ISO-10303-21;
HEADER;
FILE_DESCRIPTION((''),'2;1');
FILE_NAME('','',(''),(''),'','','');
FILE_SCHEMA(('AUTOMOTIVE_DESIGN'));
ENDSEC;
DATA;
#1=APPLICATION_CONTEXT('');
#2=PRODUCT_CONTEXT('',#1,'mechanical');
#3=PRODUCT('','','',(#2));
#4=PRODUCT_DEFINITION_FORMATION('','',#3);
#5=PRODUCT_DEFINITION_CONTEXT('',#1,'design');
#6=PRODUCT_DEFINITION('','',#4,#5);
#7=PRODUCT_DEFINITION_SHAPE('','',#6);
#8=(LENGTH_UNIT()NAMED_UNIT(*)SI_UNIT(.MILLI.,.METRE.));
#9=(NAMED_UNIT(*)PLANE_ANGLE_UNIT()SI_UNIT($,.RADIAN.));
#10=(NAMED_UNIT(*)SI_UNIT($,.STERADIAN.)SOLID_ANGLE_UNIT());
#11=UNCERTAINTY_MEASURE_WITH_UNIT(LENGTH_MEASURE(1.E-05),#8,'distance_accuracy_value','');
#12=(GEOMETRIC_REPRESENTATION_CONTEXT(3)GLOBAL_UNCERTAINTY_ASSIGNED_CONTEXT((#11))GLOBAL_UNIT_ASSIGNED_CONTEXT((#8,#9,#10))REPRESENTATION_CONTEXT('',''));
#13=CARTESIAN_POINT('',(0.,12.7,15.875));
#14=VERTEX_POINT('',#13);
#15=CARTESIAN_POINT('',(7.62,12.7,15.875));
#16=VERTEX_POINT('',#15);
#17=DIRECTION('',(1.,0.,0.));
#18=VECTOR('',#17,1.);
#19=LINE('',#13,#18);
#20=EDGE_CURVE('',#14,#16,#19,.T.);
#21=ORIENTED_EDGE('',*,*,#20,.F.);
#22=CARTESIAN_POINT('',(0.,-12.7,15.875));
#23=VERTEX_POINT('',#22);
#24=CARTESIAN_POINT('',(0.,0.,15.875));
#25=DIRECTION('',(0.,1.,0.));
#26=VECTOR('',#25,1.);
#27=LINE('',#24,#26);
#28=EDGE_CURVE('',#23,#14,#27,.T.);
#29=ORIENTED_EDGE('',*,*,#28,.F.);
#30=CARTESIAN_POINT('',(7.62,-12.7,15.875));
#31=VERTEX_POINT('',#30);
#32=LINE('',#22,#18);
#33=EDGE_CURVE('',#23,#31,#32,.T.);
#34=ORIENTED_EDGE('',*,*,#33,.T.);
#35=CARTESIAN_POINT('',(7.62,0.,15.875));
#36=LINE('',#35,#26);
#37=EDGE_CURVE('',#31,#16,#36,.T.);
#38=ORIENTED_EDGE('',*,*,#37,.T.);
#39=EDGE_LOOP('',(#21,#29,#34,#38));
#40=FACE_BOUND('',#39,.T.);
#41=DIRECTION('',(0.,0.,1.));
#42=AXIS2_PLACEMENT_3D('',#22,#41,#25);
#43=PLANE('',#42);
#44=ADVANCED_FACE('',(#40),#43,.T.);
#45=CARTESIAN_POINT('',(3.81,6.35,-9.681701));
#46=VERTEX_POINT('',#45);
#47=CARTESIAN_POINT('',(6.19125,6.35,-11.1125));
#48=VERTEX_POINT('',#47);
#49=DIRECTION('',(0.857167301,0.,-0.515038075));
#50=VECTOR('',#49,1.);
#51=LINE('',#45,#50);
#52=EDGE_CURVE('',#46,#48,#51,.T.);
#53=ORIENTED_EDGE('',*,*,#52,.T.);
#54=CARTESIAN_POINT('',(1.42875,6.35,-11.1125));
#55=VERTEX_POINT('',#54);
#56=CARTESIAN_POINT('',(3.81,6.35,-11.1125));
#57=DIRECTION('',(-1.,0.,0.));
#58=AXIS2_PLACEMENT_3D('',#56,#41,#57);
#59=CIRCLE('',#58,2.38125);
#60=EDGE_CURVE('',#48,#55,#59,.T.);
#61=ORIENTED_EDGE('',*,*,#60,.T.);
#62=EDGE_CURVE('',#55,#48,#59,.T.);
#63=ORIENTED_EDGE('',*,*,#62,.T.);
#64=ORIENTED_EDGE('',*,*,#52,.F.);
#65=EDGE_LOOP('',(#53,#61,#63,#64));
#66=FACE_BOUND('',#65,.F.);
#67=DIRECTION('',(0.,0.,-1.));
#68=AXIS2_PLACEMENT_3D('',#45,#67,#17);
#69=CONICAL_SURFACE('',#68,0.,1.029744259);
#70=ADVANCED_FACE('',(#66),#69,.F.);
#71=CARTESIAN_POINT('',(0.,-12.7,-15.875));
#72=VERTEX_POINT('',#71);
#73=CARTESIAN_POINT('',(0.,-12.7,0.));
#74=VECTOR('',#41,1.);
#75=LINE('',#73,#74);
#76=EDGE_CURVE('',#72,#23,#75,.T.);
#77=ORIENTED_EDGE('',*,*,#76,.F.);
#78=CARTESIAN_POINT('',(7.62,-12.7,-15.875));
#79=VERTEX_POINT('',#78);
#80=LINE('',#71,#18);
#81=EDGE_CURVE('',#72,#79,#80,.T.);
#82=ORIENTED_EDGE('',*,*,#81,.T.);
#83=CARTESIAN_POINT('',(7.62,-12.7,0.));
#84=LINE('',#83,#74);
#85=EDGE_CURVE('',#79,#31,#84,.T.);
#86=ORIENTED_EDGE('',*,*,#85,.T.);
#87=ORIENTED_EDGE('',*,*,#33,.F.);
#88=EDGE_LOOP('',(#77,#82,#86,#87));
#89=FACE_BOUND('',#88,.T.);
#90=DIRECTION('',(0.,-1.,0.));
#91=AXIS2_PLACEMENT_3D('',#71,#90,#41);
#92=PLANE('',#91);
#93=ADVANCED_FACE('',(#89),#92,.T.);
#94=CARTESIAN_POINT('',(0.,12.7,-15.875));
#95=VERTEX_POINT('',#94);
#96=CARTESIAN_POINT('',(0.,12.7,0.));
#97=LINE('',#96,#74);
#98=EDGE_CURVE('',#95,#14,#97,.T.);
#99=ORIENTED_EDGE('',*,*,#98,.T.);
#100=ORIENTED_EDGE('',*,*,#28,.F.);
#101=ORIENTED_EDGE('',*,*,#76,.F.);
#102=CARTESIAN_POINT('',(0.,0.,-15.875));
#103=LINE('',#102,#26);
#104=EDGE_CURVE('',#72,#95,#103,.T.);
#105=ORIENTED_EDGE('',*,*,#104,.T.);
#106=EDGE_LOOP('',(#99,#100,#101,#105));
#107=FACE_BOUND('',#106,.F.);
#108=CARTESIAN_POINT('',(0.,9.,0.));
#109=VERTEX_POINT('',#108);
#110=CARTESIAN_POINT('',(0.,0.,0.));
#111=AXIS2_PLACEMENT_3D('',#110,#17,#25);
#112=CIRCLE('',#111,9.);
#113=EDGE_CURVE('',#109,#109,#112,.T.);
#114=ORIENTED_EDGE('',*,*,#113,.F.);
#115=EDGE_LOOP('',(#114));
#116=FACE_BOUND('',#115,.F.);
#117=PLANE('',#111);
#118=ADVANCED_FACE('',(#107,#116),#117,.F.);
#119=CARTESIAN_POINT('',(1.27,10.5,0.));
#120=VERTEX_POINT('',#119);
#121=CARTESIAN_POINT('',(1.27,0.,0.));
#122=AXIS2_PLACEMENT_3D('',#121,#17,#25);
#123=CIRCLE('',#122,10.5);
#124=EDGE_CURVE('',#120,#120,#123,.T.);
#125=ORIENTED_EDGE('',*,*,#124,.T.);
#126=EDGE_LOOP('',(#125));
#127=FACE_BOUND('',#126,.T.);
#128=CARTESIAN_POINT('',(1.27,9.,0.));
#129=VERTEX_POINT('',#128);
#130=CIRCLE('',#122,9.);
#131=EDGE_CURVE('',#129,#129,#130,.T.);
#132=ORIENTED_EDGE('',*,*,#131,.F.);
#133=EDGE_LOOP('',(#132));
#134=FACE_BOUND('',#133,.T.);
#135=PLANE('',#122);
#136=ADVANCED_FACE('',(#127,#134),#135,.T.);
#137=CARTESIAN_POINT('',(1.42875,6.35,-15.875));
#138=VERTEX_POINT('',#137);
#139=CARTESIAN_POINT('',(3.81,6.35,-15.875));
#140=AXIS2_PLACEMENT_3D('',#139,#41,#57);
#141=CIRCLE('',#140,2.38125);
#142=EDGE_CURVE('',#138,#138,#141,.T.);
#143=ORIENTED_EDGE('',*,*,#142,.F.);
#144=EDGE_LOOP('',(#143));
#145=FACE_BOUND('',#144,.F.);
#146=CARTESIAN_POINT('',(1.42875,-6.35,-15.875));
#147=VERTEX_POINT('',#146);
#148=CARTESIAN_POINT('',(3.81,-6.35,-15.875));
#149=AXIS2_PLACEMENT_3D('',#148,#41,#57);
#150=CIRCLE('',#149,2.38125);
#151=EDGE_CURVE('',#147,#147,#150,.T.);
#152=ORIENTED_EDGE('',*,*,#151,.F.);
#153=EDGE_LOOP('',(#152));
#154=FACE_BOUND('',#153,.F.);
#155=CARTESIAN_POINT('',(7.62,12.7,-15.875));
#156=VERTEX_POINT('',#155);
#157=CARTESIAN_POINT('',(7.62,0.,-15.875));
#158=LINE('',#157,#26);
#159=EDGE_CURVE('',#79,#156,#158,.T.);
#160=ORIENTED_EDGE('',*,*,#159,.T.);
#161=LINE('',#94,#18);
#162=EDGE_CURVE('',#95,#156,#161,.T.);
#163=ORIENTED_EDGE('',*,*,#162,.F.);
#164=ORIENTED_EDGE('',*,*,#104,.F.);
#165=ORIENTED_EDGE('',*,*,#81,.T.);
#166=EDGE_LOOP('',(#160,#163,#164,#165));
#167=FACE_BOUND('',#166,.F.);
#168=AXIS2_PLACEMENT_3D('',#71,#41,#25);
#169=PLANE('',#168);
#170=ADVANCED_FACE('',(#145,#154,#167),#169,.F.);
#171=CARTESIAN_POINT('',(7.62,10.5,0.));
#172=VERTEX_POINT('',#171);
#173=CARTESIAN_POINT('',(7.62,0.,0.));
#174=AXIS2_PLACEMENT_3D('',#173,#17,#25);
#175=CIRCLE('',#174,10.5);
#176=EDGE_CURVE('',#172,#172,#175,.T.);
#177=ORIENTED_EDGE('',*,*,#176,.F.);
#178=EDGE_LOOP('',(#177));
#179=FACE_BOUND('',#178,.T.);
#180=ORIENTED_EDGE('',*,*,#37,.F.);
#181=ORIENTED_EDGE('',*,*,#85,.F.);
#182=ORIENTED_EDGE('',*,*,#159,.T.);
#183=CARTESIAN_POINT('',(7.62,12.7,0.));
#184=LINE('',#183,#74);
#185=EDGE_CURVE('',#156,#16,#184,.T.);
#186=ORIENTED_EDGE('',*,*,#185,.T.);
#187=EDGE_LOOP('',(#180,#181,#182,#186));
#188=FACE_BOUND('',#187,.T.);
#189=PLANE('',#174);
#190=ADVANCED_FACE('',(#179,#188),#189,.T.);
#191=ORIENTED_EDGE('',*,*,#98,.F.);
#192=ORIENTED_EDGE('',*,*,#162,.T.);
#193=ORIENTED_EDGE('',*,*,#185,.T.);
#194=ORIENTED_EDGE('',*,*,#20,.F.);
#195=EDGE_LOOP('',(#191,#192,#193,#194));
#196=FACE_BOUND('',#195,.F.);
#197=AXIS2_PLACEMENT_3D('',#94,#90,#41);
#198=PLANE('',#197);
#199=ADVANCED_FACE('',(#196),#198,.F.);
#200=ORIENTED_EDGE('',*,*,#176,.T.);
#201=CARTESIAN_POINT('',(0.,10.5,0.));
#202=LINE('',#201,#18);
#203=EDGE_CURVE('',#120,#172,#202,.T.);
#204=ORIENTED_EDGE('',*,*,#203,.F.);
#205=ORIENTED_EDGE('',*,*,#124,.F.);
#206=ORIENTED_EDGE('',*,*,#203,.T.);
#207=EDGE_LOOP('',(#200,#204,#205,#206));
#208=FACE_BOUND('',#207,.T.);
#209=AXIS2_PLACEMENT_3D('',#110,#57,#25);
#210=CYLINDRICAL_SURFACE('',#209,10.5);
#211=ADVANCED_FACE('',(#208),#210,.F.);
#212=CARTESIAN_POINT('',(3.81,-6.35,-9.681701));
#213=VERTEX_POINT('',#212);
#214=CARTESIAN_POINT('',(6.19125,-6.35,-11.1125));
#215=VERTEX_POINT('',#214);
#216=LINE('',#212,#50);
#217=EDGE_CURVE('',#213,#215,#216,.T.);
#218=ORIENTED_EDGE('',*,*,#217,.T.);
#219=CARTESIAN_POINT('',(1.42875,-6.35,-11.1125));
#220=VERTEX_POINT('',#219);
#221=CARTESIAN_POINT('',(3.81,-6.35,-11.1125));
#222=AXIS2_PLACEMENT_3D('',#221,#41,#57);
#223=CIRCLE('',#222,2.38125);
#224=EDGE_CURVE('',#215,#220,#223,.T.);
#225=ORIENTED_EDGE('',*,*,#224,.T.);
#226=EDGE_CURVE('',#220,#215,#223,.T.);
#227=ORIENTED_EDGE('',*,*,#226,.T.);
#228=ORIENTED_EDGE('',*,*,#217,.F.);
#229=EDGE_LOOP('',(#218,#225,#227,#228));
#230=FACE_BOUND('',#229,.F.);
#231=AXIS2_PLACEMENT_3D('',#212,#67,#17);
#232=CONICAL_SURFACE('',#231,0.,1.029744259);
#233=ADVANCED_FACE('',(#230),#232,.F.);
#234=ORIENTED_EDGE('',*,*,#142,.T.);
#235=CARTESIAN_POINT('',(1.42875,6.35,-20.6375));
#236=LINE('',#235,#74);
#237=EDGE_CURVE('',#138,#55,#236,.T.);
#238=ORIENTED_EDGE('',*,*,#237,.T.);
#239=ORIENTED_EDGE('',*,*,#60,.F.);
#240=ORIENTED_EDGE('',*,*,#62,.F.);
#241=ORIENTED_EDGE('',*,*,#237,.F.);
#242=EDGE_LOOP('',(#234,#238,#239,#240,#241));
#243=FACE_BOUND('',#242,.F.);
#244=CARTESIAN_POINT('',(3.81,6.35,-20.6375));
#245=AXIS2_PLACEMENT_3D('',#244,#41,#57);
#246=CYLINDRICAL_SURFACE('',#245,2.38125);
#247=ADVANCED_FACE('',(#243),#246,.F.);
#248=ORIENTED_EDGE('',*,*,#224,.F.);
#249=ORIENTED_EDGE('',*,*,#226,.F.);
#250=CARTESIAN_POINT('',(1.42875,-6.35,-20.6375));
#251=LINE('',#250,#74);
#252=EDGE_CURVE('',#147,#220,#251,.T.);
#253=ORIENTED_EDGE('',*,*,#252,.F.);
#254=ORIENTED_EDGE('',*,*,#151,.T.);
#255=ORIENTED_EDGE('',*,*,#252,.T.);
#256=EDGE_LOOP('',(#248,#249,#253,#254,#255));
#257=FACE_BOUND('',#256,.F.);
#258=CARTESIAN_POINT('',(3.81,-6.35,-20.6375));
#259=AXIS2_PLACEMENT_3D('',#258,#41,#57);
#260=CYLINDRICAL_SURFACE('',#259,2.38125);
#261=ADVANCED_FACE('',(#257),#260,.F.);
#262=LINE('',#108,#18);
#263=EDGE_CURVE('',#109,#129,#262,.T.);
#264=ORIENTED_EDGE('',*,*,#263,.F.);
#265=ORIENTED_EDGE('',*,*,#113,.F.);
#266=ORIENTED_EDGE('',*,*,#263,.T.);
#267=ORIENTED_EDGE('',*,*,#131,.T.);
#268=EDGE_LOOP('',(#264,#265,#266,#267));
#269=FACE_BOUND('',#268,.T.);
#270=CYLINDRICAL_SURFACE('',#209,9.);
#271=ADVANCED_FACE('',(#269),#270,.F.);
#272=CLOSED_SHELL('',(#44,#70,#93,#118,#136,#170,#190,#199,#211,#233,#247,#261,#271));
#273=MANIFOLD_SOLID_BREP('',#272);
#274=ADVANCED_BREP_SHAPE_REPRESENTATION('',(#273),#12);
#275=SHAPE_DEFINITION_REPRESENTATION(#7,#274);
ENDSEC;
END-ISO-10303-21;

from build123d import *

# Parameters (mm, degrees)
F0_W     = 25.4
F0_H     = 31.75
F0_R     = 10.5
F1_DEPTH = 7.62
F3_D     = 4.7625
F3_DEPTH = 4.7625
F3_TIP   = 1.4307993491
F0_R_2   = 9
F4_DEPTH = 1.27


# Not quite as in the source:
# - a feature names something its author has since deleted; it is built from what else it names


with BuildPart() as f1:
    # F0 (on Right) → F1 (new body)
    with BuildSketch(Plane.YZ):
        Rectangle(F0_W, F0_H)
        Circle(F0_R, mode=Mode.SUBTRACT)
    extrude(amount=F1_DEPTH)

    # F3
    with Locations(Plane(origin=(0, 0, -15.875), x_dir=(1, 0, 0), z_dir=(0, 0, -1))):
        with Locations((3.81, 6.35), (3.81, -6.35)):
            Hole(F3_D / 2, depth=F3_DEPTH)
            with Locations((0, 0, -(F3_DEPTH + F3_TIP / 2))):  # 118° drill point
                Cone(0, F3_D / 2, F3_TIP, mode=Mode.SUBTRACT)

    # F0 (on Right) → F4 (join)
    with BuildSketch(Plane.YZ):
        Circle(F0_R)
        Circle(F0_R_2, mode=Mode.SUBTRACT)
    extrude(amount=F4_DEPTH)


solid = f1.part
